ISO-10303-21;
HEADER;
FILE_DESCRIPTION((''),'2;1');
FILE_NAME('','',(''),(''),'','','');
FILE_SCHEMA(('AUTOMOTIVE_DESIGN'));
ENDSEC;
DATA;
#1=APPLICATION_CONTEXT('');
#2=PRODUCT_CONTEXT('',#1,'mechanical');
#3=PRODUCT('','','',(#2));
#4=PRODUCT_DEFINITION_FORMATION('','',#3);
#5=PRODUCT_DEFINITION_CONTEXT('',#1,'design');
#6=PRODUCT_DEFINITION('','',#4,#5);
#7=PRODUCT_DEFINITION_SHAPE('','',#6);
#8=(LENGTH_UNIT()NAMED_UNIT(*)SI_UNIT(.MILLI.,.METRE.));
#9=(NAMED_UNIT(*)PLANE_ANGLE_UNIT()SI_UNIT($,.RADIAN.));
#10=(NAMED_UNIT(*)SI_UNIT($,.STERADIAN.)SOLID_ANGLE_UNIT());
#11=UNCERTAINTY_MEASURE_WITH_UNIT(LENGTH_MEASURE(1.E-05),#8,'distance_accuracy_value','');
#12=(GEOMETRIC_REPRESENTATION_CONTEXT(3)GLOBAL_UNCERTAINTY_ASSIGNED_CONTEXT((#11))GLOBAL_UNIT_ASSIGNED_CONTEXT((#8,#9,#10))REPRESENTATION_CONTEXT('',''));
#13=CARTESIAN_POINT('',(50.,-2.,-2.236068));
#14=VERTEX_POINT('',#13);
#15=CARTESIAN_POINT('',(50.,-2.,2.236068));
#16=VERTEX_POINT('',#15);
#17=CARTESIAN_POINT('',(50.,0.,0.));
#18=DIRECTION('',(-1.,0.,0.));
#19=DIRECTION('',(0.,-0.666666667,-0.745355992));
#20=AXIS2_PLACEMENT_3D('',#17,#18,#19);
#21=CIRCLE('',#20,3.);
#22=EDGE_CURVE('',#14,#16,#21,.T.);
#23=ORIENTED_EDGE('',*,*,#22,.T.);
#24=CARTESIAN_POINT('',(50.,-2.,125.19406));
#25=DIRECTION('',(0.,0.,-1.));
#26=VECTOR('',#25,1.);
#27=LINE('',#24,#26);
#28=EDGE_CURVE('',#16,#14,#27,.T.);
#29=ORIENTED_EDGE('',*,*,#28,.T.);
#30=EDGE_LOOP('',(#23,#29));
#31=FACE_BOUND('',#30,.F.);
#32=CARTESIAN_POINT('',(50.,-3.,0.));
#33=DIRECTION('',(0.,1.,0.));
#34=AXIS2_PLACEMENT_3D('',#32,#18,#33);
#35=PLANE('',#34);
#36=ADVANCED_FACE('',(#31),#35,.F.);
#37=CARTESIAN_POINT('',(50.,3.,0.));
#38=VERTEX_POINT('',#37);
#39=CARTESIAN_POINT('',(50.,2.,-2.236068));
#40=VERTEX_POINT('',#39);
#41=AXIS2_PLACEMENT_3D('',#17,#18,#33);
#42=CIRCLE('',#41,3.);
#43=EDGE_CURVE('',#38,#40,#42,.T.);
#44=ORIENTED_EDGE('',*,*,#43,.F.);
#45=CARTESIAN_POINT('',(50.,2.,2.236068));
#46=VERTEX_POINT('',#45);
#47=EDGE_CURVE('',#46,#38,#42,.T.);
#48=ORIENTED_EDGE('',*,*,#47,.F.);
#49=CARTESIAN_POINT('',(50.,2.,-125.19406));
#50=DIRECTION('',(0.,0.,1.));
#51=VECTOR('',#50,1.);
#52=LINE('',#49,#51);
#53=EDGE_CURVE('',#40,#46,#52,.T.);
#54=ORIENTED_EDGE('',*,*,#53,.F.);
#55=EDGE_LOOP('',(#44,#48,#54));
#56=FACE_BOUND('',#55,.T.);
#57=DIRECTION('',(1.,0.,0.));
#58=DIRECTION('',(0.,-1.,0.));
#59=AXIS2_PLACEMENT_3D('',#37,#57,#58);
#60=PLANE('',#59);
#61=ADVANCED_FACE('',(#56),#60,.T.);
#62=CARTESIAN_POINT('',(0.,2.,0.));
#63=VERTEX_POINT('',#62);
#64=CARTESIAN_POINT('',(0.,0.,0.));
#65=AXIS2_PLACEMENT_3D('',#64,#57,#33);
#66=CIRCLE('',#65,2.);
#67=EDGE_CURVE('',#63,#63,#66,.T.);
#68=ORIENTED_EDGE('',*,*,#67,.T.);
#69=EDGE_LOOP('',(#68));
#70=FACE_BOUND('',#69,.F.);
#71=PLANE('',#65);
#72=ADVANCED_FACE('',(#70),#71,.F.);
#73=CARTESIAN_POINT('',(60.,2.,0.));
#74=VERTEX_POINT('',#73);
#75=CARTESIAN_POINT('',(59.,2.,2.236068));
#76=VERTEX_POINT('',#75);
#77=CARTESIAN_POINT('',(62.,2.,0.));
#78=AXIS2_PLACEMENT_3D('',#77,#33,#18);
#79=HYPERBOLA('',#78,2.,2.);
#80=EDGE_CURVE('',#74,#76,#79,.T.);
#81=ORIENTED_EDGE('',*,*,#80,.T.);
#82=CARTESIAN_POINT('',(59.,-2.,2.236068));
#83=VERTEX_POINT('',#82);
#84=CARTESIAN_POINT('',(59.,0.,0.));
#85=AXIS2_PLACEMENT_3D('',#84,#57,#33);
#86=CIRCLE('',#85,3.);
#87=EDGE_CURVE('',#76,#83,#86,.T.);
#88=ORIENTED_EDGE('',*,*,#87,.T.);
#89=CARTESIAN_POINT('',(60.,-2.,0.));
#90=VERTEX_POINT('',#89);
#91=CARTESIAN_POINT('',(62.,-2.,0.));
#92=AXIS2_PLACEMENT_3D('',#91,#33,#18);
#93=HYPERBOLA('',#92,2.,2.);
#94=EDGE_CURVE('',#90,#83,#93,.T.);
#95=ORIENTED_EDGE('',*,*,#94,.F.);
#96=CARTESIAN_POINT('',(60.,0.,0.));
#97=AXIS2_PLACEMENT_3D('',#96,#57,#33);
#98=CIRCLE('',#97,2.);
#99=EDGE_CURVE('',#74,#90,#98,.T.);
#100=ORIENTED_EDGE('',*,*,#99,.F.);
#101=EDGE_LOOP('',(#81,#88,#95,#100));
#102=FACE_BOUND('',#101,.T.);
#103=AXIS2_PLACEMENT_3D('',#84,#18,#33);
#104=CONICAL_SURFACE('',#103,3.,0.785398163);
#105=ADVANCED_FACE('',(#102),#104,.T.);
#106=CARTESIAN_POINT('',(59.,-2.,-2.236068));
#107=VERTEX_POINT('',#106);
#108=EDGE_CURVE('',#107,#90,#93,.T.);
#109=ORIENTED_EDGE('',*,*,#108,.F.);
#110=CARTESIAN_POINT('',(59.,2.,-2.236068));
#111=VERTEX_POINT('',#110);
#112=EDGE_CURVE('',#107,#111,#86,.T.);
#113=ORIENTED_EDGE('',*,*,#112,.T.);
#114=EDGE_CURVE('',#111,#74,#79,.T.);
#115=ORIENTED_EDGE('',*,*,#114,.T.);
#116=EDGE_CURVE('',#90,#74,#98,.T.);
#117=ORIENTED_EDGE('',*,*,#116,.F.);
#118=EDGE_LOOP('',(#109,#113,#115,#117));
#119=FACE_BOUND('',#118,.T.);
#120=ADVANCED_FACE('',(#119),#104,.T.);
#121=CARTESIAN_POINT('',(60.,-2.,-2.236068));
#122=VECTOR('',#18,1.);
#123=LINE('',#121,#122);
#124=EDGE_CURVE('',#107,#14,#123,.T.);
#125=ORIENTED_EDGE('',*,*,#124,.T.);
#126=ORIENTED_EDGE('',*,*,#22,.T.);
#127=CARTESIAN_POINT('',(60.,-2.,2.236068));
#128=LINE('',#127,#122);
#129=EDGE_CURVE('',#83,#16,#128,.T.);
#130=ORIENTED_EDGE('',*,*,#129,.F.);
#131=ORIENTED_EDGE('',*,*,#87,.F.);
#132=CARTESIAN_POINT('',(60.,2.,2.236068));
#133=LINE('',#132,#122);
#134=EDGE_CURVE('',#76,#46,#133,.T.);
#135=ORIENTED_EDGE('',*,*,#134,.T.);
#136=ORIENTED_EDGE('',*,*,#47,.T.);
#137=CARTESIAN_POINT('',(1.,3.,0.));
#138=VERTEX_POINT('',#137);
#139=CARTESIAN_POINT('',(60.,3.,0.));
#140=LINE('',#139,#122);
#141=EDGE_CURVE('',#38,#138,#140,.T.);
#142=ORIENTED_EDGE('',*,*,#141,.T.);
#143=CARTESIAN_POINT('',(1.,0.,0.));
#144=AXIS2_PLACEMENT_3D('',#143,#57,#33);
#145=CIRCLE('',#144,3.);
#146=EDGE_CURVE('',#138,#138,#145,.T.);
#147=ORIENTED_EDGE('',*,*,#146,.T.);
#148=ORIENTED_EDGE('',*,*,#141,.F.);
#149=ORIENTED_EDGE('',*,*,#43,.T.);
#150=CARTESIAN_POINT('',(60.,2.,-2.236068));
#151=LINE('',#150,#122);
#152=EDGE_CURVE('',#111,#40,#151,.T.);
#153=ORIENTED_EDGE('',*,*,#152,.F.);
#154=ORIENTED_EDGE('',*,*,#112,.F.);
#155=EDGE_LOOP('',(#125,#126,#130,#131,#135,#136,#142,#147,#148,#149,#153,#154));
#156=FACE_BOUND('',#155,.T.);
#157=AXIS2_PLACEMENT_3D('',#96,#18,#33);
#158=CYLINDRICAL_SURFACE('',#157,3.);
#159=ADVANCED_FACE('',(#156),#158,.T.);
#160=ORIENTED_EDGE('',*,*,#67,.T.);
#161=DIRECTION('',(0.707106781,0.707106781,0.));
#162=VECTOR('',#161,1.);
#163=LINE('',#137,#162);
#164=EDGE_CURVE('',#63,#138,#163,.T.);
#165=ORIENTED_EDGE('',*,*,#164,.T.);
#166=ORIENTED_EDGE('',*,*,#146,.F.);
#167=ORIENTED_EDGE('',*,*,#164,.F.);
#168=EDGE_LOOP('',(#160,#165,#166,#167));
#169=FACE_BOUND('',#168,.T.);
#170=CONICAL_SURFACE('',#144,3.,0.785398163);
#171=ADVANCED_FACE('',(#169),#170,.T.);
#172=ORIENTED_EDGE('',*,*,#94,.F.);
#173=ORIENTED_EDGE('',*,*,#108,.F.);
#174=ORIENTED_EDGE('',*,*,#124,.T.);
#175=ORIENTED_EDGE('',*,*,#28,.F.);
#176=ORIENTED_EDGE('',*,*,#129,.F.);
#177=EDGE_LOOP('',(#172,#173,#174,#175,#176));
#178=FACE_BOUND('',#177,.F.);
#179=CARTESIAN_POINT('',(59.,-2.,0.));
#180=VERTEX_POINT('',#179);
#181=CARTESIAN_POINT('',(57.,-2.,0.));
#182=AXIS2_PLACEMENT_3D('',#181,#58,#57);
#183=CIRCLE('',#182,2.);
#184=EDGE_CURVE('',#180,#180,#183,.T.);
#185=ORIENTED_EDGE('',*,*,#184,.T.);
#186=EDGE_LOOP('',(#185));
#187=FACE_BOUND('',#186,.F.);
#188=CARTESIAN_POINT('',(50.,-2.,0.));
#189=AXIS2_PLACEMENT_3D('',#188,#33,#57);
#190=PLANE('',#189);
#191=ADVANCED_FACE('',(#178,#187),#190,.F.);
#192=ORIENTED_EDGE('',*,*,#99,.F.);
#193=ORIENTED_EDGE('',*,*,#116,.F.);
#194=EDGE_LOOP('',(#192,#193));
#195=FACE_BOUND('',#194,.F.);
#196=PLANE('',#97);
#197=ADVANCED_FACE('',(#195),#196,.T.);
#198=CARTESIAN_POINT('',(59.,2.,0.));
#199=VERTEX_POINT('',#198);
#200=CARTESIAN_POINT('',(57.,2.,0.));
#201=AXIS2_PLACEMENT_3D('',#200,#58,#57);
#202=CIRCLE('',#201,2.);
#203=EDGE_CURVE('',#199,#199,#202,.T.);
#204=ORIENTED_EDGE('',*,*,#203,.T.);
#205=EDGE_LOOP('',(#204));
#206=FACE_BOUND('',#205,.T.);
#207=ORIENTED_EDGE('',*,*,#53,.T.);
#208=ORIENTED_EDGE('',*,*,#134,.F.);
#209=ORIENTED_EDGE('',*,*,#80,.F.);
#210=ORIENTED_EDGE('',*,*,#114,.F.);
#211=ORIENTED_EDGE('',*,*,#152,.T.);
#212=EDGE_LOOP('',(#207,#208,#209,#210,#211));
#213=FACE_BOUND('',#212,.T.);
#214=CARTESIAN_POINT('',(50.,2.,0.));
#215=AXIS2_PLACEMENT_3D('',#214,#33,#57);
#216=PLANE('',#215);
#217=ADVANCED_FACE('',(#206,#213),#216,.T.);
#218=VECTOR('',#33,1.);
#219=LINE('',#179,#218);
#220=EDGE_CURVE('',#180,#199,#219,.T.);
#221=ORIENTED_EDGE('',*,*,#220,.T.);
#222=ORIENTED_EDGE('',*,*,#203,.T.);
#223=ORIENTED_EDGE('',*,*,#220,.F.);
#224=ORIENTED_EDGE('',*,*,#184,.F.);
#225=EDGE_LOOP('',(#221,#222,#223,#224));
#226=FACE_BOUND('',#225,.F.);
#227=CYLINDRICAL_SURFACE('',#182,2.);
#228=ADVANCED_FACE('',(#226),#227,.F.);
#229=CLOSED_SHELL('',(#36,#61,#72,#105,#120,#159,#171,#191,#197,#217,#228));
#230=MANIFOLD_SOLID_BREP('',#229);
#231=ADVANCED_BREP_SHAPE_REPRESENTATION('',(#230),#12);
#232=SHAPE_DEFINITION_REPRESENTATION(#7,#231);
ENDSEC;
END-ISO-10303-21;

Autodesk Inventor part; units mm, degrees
ref_plane "YZ Plane" through (0, 0, 0) normal (1, 0, 0) x (0, 1, 0)
ref_plane "XZ Plane" through (0, 0, 0) normal (0, 1, 0) x (-1, 0, 0)
ref_plane "XY Plane" through (0, 0, 0) normal (0, 0, 1) x (1, 0, 0)
sketch "Sketch1" plane through (0, 0, 0) normal (0, 0, 1) x (1, 0, 0)
  line L0 (0, 0) -> (60, 0)
  line L1 (60, 0) -> (60, 3)
  line L2 (60, 3) -> (0, 3)
  line L3 (0, 3) -> (0, 0)
  dimension "d0" = 60
  dimension "d1" = 6
revolve "Revolution1" add sketch "Sketch1" angle 360 about axis through (0, 0, 0) along (1, 0, 0)
thread "Thread1" size "M6x1" class "6g" standard "ANSI Metric M Profile" length 15
chamfer "Chamfer1" distance 1 angle 45 2 edges at (0, -3, 0) (60, -3, 0)
sketch "Sketch2" plane through (0, 0, 0) normal (0, 0, 1) x (1, 0, 0)
  line L0 (1, 3) -> (59, 3) projected
  line L1 (60, 3) -> (50, 3)
  line L2 (50, 3) -> (50, 2)
  line L3 (50, 2) -> (60, 2)
  line L4 (60, 2) -> (60, 3)
  line L5 (60, -3) -> (60, 3) projected
  line L6 (60, -3) -> (50, -3)
  line L7 (50, -3) -> (50, -2)
  line L8 (50, -2) -> (60, -2)
  line L9 (60, -2) -> (60, -3)
  point P0 (0, 0)
  point P1 (50, 3)
  dimension "d8" = 4
  dimension "d15" = 10
extrude "Extrusion1" cut sketch "Sketch2" along normal through all both and the other way through all
sketch "Sketch3" plane through (50, -2, -2.2361) normal (0, -1, 0) x (1, 0, 0)
  circle A0 centre (7, 2.2361) radius 2
  line L0 (10, 2.2361) -> (10, 0.2361) projected
  point P0 (-50, 2.2361)
  dimension "d11" = 4
  dimension "d14" = 3
extrude "Extrusion2" cut sketch "Sketch3" against normal through all
properties part number "M6x1_THREADED_ROD_CPY"
